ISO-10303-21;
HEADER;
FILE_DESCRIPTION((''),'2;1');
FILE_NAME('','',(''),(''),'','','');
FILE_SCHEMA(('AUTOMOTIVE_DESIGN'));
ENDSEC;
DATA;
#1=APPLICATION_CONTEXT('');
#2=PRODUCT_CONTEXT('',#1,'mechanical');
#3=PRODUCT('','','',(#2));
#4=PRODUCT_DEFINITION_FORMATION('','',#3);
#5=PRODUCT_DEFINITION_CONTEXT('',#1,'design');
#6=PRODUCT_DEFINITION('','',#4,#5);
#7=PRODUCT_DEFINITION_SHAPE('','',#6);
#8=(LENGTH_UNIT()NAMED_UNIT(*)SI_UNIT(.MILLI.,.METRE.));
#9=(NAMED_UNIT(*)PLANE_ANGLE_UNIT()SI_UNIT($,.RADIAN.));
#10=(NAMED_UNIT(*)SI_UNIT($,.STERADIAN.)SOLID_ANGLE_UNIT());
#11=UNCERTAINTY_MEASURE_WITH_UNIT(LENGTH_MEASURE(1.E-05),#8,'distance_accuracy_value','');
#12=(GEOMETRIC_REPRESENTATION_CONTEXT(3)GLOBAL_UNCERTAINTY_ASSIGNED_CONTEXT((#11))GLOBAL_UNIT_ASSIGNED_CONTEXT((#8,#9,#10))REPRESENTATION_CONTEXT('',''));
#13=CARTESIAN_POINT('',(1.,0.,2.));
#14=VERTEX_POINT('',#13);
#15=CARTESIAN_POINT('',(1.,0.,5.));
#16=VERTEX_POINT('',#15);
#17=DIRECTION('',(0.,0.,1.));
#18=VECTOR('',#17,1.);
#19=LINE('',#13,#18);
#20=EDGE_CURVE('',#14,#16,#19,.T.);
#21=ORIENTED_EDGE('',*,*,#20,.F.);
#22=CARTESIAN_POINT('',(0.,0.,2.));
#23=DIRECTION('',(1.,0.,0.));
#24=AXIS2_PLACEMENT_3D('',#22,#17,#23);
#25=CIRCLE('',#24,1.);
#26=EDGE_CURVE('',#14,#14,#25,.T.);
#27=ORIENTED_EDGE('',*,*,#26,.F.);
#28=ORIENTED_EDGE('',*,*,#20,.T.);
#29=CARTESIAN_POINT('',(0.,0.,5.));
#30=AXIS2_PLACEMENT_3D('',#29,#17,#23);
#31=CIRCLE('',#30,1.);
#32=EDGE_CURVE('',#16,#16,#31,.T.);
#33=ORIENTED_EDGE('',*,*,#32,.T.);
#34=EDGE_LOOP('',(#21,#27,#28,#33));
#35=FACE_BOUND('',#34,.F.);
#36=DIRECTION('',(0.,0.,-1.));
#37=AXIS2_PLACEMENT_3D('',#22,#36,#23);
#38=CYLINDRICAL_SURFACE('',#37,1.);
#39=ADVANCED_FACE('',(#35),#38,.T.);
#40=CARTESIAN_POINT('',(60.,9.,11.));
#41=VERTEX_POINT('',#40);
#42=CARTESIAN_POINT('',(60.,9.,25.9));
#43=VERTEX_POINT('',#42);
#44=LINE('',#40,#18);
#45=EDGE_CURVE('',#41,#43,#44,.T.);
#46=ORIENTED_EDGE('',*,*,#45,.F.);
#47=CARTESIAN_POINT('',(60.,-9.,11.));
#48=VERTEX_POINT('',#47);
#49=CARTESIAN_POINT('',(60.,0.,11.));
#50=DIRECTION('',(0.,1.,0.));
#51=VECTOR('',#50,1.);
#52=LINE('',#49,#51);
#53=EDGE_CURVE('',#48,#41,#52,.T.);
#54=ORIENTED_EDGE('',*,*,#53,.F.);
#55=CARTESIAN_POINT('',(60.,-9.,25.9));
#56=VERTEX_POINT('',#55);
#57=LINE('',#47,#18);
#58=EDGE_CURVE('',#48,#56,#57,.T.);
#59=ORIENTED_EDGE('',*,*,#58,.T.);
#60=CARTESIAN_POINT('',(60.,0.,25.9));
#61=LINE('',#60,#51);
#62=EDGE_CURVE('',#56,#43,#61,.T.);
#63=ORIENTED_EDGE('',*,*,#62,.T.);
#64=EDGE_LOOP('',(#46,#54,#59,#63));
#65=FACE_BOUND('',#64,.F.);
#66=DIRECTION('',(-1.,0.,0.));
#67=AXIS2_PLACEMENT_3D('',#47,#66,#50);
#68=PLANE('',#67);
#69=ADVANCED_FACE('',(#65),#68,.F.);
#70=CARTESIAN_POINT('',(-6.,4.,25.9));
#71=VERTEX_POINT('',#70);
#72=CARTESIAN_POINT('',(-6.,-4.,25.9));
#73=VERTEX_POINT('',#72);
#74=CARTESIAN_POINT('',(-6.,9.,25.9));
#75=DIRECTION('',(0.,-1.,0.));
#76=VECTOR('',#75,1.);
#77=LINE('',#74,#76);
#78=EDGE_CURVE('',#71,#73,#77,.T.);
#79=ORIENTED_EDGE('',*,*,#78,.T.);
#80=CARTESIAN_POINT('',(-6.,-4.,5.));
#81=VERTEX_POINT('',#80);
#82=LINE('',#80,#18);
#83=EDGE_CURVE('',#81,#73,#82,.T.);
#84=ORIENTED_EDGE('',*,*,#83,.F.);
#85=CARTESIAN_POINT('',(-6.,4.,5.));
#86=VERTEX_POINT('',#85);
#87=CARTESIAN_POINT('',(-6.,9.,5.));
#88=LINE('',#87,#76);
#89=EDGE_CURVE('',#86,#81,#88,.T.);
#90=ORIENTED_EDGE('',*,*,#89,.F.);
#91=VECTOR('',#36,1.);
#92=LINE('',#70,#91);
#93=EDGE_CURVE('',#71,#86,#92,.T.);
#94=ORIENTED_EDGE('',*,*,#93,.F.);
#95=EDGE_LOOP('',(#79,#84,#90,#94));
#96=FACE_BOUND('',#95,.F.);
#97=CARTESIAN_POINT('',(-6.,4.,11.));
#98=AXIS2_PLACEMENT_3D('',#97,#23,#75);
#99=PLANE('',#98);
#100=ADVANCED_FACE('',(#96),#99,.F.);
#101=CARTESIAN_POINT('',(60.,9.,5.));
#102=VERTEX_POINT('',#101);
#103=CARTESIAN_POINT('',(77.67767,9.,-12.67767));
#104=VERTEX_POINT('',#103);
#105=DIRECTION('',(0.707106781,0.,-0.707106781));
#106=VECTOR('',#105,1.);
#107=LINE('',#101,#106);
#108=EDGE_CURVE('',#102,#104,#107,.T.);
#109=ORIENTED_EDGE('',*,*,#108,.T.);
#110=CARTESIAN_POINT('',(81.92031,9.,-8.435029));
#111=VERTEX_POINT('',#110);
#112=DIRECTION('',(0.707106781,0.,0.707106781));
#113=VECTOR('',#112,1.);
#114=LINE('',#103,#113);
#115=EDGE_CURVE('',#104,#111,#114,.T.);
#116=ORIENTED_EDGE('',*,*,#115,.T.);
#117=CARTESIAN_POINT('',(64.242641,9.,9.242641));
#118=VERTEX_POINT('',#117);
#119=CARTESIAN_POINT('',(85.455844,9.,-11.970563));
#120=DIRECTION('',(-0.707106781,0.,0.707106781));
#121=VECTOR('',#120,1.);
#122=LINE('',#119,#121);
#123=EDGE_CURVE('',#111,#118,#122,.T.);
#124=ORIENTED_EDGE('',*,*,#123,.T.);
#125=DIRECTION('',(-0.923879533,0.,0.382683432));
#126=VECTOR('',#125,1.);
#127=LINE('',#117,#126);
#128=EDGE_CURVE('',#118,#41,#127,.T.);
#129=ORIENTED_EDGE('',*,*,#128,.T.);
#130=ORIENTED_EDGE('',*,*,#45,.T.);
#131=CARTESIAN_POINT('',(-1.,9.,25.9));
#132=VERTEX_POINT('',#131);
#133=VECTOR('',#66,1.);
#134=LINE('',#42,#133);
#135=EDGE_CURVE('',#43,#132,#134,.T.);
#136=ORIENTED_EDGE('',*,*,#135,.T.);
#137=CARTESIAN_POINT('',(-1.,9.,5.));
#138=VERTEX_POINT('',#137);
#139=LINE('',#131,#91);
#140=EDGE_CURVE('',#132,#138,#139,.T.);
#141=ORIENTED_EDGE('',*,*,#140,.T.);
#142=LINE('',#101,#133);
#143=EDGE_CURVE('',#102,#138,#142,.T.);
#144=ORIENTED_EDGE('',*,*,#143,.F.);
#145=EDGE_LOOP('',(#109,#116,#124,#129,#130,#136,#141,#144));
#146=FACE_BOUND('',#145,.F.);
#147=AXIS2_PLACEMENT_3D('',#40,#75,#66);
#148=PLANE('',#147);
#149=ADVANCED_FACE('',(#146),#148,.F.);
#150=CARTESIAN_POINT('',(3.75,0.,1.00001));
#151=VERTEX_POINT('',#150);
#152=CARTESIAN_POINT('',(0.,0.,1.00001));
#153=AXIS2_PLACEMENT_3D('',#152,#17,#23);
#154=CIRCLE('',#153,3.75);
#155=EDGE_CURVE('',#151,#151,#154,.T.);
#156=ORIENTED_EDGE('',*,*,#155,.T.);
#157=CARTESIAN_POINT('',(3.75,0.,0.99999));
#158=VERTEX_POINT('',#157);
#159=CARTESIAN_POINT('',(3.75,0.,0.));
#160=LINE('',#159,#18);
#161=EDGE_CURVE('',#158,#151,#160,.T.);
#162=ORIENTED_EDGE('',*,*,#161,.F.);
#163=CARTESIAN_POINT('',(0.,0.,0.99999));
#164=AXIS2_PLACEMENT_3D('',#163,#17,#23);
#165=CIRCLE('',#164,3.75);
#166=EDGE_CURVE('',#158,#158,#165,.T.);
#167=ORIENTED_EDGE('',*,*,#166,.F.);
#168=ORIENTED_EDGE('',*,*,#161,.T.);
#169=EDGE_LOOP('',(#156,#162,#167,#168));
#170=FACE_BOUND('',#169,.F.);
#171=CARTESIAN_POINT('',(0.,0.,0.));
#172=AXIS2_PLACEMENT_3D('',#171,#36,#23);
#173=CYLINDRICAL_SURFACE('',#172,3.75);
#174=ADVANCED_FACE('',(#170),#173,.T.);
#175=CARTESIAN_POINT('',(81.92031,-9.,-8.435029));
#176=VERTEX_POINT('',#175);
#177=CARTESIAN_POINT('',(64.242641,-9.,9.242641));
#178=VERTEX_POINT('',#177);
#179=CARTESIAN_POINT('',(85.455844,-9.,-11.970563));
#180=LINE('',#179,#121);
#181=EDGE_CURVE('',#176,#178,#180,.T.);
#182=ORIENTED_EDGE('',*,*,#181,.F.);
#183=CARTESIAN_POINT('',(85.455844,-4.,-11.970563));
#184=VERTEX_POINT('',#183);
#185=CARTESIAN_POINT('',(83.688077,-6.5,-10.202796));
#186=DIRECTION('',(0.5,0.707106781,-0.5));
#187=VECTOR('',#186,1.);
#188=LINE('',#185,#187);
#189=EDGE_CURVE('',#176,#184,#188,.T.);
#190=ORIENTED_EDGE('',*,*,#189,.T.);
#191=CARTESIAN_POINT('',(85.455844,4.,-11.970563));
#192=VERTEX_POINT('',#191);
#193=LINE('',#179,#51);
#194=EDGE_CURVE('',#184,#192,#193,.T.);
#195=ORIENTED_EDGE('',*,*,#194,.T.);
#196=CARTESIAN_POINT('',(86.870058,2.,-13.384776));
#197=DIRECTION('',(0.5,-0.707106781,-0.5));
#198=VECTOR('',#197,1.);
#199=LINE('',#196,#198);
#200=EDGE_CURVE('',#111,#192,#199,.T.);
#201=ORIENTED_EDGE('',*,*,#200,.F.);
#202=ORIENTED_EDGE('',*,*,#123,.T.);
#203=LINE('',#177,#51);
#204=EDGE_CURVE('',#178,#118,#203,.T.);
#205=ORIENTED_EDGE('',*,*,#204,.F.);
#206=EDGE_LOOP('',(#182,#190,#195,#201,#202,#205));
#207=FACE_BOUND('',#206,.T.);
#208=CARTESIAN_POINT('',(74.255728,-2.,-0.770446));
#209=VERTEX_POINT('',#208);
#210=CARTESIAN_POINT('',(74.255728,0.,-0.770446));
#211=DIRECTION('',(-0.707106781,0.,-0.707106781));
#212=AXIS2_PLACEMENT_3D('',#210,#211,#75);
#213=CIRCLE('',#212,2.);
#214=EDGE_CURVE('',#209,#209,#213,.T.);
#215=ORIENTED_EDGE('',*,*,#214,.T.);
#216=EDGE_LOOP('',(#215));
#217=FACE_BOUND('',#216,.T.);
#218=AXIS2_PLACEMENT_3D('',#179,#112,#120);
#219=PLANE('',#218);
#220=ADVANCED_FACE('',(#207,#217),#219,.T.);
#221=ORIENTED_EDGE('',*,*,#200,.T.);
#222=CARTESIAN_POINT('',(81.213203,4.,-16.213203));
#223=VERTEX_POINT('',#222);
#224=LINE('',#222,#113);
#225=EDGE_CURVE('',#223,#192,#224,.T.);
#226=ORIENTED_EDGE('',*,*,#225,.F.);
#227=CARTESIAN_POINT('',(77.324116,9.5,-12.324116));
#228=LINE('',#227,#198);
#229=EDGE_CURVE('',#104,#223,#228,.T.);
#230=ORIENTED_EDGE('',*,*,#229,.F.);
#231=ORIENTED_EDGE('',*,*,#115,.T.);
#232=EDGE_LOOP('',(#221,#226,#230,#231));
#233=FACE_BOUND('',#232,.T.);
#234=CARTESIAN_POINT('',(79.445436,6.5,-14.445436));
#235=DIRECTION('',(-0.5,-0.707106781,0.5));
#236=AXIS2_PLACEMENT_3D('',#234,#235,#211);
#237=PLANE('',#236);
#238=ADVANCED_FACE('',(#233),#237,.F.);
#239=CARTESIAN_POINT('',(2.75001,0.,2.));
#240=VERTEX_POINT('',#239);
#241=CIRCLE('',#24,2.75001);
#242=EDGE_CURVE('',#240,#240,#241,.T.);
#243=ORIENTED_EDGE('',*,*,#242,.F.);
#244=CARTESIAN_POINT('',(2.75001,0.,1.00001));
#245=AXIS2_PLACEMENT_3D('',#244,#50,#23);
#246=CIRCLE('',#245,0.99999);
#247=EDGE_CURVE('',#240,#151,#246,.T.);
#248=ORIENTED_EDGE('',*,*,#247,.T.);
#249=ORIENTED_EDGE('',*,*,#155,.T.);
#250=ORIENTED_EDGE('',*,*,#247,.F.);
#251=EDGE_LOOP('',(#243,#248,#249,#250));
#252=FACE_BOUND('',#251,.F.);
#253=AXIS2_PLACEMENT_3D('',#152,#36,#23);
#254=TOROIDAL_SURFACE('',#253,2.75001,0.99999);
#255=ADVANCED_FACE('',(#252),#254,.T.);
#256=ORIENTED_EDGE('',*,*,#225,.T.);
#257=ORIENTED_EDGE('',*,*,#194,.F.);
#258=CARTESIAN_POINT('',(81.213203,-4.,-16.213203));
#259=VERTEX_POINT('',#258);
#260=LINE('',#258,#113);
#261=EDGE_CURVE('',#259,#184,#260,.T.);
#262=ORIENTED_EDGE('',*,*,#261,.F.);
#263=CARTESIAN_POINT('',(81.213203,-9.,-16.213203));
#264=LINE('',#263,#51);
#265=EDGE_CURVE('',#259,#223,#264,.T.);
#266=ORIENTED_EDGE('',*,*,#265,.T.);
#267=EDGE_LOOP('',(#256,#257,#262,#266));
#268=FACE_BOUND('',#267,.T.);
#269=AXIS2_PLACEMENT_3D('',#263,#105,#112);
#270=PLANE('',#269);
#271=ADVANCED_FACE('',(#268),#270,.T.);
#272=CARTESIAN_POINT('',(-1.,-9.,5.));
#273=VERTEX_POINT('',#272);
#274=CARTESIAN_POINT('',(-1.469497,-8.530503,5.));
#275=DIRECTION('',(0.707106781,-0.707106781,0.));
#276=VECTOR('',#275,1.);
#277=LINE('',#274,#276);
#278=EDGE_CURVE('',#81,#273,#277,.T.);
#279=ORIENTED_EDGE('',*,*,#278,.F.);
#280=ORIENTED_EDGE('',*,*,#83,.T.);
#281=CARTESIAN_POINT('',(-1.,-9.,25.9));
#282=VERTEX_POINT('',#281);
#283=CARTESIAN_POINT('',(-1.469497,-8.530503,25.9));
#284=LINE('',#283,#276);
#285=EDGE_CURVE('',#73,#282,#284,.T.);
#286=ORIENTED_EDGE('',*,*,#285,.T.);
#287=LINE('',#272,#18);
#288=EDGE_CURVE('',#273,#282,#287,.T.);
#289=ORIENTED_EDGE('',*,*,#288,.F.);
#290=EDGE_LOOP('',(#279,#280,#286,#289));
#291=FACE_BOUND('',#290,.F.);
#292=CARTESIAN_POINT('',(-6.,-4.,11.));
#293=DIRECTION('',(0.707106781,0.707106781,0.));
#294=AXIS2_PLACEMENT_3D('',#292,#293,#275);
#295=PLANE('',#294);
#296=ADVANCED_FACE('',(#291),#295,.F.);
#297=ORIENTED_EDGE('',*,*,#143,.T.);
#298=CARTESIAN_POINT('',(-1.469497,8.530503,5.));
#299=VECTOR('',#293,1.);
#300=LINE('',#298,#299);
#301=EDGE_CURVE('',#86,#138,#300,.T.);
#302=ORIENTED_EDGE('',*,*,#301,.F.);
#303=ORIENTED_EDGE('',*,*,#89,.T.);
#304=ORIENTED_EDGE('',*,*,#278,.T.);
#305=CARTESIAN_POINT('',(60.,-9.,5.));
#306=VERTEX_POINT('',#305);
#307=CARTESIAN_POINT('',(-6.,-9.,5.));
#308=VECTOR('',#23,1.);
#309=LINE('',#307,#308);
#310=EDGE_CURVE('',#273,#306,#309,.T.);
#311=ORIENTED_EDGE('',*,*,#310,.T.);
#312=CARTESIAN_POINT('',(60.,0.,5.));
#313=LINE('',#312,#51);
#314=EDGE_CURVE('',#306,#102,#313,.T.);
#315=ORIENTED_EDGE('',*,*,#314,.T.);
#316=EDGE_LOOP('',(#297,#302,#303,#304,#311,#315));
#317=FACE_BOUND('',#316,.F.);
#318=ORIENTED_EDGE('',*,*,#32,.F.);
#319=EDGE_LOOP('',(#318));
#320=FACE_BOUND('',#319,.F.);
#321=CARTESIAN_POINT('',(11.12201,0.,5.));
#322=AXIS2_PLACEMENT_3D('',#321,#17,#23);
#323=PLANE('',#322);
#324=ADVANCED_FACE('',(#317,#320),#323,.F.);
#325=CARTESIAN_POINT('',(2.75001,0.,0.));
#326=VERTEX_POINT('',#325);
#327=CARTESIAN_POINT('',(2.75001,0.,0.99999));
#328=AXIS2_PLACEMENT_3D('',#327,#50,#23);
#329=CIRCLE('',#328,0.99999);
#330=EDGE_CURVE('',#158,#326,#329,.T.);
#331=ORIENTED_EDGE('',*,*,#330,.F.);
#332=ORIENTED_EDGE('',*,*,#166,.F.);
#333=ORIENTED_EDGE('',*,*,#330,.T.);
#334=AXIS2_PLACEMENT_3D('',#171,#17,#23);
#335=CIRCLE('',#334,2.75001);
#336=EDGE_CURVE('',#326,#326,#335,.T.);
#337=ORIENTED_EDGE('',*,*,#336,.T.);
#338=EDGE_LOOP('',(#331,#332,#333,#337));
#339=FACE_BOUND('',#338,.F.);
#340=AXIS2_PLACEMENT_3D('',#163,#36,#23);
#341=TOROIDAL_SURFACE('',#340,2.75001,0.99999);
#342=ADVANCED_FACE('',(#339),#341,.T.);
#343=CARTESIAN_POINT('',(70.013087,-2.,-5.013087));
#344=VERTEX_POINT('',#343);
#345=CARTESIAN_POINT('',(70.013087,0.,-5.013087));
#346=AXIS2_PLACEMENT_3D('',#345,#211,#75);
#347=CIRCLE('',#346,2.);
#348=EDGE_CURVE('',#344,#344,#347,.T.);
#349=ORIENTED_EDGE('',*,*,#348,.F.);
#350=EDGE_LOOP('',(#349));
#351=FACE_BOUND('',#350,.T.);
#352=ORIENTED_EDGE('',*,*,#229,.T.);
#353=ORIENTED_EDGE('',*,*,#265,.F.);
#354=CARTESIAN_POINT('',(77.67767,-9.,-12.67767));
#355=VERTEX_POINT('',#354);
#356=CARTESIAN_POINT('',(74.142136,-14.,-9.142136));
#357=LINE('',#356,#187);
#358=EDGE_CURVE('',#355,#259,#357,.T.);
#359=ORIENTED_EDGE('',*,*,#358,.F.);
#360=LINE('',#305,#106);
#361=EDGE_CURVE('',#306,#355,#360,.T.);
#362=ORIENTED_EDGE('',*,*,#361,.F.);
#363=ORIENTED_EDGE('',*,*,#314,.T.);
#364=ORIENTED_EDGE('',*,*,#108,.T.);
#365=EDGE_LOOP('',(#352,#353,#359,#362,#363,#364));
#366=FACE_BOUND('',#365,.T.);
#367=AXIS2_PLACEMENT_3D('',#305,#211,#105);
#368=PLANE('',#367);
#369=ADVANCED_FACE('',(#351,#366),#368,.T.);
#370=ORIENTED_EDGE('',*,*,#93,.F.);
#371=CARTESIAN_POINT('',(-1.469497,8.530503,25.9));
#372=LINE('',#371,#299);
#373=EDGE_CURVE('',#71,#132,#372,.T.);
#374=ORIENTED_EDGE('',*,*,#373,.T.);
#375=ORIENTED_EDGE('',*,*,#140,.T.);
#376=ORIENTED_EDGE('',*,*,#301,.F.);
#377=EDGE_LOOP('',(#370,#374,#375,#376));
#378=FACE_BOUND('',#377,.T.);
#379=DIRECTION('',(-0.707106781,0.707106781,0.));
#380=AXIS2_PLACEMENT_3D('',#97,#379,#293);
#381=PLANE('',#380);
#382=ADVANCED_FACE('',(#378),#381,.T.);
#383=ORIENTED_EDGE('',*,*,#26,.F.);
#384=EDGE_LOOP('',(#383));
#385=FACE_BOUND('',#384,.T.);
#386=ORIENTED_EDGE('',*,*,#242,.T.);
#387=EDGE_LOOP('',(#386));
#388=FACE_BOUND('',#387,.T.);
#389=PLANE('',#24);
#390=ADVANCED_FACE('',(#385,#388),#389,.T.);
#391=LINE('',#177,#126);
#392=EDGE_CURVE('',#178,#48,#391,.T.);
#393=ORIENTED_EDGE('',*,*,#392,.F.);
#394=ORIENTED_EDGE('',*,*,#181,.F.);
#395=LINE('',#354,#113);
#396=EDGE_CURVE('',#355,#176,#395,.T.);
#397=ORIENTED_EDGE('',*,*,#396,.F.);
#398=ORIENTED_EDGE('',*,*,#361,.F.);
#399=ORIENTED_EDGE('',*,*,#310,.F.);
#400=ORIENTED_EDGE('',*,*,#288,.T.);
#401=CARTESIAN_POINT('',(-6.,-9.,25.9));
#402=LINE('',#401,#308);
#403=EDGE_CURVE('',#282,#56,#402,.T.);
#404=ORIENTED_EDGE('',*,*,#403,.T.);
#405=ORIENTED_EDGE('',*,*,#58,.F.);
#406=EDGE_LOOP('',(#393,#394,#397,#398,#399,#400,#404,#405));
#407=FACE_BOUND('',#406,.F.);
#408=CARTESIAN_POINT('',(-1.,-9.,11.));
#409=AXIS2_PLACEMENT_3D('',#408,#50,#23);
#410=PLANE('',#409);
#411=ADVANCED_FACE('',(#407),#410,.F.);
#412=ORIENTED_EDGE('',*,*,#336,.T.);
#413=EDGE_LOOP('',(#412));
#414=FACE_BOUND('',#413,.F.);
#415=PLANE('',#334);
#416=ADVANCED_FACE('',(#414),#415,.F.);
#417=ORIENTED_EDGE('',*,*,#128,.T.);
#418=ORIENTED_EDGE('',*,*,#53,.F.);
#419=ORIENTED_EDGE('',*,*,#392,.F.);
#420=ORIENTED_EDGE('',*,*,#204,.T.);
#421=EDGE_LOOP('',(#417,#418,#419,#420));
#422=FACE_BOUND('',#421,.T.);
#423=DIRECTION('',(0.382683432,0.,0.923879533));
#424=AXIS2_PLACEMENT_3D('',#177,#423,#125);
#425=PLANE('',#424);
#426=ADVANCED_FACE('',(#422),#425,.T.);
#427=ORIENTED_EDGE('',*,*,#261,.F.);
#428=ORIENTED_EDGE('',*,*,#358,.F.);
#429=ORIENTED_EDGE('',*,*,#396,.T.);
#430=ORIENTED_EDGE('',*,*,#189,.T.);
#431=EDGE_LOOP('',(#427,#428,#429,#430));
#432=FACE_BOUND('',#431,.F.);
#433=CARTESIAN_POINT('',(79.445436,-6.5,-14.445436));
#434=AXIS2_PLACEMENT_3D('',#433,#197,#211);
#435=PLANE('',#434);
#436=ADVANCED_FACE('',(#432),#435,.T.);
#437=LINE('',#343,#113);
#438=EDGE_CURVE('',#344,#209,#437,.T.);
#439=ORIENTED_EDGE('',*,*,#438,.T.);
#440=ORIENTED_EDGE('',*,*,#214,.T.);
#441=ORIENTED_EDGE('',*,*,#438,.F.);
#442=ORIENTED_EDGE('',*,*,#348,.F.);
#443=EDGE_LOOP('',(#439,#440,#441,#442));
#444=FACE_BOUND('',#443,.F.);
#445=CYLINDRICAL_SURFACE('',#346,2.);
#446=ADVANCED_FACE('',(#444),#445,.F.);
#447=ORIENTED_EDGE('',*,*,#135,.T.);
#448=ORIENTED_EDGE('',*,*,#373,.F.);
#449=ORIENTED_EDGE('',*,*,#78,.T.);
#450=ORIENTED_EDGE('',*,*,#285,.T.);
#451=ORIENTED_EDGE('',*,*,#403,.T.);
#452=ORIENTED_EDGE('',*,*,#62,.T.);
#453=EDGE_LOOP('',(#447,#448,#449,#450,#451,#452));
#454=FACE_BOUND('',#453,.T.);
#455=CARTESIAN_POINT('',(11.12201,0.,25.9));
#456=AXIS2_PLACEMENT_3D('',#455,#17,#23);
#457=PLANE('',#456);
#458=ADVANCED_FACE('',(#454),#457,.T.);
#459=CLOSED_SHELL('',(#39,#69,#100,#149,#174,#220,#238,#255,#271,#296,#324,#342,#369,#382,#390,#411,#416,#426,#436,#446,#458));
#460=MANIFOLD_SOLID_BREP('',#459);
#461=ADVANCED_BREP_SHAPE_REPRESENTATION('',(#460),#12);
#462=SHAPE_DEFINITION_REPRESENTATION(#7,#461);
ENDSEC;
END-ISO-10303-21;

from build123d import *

# Parameters (mm, degrees)
F0_R      = 3.75
F1_DEPTH  = 2
F2_R      = 1
F3_DEPTH  = 3
F4_W      = 37.5
F4_H      = 18
F5_DEPTH  = 6
F7_DEPTH  = 18
F8_R      = 2
F9_DEPTH  = 37.8
F10_R     = 0.99999
F11_SIZE  = 5
F12_DEPTH = 14.9


# Not quite as in the source:
# - a fillet or chamfer is up to 0.001 mm smaller than in the source, because OpenCascade refuses the exact size


with BuildPart() as f1:
    # F0 (on Top) → F1 (new body)
    with BuildSketch(Plane.XY):
        Circle(F0_R)
    extrude(amount=F1_DEPTH)

    # F2 (on face) → F3 (join)
    with BuildSketch(Plane.XY.offset(2)):
        Circle(F2_R)
    extrude(amount=F3_DEPTH)

    # F4 (on face) → F5 (join)
    with BuildSketch(Plane.XY.offset(5)):
        with BuildLine():
            Line((22.5, 9), (0, 9))
            Line((0, 9), (0, 1))
            ThreePointArc((0, 1), (0.7071067812, 0.7071067812), (1, 0))
            ThreePointArc((1, 0), (0.7071067812, -0.7071067812), (0, -1))
            Line((0, -1), (0, -9))
            Line((0, -9), (22.5, -9))
            Line((22.5, -9), (22.5, 9))
        make_face()
        with BuildLine():
            ThreePointArc((1, 0), (0.7071067812, 0.7071067812), (0, 1))
            Line((0, 1), (0, -1))
            ThreePointArc((0, -1), (0.7071067812, -0.7071067812), (1, 0))
        make_face()
        with BuildLine():
            Line((0, -1), (0, 1))
            ThreePointArc((0, 1), (-1, 0), (0, -1))
        make_face()
        with BuildLine():
            Line((0, 9), (-6, 9))
            Line((-6, 9), (-6, -9))
            Line((-6, -9), (0, -9))
            Line((0, -9), (0, -1))
            ThreePointArc((0, -1), (-1, 0), (0, 1))
            Line((0, 1), (0, 9))
        make_face()
        with Locations((41.25, 0)):
            Rectangle(F4_W, F4_H)
    extrude(amount=F5_DEPTH)

    # F6 (on face) → F7 (join)
    with BuildSketch(Plane.XZ.offset(9)):
        Polygon((64.2426406871, 9.2426406871), (60, 5), (81.2132034356, -16.2132034356), (85.4558441227, -11.9705627485), align=None)
        Polygon((60, 11), (60, 5), (64.2426406871, 9.2426406871), align=None)
    extrude(amount=-F7_DEPTH)

    # F8 (on face) → F9 (cut)
    with BuildSketch(Plane(origin=(32.5, 0, 32.5), x_dir=(0, -1, 0), z_dir=(-0.7071067812, 0, -0.7071067812))):
        with Locations((0, -53.0515164137)):
            Circle(F8_R)
    extrude(amount=-F9_DEPTH, mode=Mode.SUBTRACT)

    # F10 (radius 1 in the source; OpenCascade refuses exactly that, so slightly less here)
    f10_edges = [f1.edges().sort_by_distance(p)[0] for p in [
        (-3.75, 0, 0),
        (-3.75, 0, 2),
    ]]
    fillet(f10_edges, radius=F10_R)

    # F11
    f11_edges = [f1.edges().sort_by_distance(p)[0] for p in [
        (-6, -9, 8),
        (-6, 9, 8),
        (83.334524, 9, -14.091883),
        (83.334524, -9, -14.091883),
    ]]
    chamfer(f11_edges, length=F11_SIZE)

    # F12 (add): a face of the model
    f12_faces = [f1.faces().sort_by_distance(p)[0] for p in [
        (27.6735454285, 0, 11),
    ]]
    extrude(f12_faces, amount=F12_DEPTH)


solid = f1.part
